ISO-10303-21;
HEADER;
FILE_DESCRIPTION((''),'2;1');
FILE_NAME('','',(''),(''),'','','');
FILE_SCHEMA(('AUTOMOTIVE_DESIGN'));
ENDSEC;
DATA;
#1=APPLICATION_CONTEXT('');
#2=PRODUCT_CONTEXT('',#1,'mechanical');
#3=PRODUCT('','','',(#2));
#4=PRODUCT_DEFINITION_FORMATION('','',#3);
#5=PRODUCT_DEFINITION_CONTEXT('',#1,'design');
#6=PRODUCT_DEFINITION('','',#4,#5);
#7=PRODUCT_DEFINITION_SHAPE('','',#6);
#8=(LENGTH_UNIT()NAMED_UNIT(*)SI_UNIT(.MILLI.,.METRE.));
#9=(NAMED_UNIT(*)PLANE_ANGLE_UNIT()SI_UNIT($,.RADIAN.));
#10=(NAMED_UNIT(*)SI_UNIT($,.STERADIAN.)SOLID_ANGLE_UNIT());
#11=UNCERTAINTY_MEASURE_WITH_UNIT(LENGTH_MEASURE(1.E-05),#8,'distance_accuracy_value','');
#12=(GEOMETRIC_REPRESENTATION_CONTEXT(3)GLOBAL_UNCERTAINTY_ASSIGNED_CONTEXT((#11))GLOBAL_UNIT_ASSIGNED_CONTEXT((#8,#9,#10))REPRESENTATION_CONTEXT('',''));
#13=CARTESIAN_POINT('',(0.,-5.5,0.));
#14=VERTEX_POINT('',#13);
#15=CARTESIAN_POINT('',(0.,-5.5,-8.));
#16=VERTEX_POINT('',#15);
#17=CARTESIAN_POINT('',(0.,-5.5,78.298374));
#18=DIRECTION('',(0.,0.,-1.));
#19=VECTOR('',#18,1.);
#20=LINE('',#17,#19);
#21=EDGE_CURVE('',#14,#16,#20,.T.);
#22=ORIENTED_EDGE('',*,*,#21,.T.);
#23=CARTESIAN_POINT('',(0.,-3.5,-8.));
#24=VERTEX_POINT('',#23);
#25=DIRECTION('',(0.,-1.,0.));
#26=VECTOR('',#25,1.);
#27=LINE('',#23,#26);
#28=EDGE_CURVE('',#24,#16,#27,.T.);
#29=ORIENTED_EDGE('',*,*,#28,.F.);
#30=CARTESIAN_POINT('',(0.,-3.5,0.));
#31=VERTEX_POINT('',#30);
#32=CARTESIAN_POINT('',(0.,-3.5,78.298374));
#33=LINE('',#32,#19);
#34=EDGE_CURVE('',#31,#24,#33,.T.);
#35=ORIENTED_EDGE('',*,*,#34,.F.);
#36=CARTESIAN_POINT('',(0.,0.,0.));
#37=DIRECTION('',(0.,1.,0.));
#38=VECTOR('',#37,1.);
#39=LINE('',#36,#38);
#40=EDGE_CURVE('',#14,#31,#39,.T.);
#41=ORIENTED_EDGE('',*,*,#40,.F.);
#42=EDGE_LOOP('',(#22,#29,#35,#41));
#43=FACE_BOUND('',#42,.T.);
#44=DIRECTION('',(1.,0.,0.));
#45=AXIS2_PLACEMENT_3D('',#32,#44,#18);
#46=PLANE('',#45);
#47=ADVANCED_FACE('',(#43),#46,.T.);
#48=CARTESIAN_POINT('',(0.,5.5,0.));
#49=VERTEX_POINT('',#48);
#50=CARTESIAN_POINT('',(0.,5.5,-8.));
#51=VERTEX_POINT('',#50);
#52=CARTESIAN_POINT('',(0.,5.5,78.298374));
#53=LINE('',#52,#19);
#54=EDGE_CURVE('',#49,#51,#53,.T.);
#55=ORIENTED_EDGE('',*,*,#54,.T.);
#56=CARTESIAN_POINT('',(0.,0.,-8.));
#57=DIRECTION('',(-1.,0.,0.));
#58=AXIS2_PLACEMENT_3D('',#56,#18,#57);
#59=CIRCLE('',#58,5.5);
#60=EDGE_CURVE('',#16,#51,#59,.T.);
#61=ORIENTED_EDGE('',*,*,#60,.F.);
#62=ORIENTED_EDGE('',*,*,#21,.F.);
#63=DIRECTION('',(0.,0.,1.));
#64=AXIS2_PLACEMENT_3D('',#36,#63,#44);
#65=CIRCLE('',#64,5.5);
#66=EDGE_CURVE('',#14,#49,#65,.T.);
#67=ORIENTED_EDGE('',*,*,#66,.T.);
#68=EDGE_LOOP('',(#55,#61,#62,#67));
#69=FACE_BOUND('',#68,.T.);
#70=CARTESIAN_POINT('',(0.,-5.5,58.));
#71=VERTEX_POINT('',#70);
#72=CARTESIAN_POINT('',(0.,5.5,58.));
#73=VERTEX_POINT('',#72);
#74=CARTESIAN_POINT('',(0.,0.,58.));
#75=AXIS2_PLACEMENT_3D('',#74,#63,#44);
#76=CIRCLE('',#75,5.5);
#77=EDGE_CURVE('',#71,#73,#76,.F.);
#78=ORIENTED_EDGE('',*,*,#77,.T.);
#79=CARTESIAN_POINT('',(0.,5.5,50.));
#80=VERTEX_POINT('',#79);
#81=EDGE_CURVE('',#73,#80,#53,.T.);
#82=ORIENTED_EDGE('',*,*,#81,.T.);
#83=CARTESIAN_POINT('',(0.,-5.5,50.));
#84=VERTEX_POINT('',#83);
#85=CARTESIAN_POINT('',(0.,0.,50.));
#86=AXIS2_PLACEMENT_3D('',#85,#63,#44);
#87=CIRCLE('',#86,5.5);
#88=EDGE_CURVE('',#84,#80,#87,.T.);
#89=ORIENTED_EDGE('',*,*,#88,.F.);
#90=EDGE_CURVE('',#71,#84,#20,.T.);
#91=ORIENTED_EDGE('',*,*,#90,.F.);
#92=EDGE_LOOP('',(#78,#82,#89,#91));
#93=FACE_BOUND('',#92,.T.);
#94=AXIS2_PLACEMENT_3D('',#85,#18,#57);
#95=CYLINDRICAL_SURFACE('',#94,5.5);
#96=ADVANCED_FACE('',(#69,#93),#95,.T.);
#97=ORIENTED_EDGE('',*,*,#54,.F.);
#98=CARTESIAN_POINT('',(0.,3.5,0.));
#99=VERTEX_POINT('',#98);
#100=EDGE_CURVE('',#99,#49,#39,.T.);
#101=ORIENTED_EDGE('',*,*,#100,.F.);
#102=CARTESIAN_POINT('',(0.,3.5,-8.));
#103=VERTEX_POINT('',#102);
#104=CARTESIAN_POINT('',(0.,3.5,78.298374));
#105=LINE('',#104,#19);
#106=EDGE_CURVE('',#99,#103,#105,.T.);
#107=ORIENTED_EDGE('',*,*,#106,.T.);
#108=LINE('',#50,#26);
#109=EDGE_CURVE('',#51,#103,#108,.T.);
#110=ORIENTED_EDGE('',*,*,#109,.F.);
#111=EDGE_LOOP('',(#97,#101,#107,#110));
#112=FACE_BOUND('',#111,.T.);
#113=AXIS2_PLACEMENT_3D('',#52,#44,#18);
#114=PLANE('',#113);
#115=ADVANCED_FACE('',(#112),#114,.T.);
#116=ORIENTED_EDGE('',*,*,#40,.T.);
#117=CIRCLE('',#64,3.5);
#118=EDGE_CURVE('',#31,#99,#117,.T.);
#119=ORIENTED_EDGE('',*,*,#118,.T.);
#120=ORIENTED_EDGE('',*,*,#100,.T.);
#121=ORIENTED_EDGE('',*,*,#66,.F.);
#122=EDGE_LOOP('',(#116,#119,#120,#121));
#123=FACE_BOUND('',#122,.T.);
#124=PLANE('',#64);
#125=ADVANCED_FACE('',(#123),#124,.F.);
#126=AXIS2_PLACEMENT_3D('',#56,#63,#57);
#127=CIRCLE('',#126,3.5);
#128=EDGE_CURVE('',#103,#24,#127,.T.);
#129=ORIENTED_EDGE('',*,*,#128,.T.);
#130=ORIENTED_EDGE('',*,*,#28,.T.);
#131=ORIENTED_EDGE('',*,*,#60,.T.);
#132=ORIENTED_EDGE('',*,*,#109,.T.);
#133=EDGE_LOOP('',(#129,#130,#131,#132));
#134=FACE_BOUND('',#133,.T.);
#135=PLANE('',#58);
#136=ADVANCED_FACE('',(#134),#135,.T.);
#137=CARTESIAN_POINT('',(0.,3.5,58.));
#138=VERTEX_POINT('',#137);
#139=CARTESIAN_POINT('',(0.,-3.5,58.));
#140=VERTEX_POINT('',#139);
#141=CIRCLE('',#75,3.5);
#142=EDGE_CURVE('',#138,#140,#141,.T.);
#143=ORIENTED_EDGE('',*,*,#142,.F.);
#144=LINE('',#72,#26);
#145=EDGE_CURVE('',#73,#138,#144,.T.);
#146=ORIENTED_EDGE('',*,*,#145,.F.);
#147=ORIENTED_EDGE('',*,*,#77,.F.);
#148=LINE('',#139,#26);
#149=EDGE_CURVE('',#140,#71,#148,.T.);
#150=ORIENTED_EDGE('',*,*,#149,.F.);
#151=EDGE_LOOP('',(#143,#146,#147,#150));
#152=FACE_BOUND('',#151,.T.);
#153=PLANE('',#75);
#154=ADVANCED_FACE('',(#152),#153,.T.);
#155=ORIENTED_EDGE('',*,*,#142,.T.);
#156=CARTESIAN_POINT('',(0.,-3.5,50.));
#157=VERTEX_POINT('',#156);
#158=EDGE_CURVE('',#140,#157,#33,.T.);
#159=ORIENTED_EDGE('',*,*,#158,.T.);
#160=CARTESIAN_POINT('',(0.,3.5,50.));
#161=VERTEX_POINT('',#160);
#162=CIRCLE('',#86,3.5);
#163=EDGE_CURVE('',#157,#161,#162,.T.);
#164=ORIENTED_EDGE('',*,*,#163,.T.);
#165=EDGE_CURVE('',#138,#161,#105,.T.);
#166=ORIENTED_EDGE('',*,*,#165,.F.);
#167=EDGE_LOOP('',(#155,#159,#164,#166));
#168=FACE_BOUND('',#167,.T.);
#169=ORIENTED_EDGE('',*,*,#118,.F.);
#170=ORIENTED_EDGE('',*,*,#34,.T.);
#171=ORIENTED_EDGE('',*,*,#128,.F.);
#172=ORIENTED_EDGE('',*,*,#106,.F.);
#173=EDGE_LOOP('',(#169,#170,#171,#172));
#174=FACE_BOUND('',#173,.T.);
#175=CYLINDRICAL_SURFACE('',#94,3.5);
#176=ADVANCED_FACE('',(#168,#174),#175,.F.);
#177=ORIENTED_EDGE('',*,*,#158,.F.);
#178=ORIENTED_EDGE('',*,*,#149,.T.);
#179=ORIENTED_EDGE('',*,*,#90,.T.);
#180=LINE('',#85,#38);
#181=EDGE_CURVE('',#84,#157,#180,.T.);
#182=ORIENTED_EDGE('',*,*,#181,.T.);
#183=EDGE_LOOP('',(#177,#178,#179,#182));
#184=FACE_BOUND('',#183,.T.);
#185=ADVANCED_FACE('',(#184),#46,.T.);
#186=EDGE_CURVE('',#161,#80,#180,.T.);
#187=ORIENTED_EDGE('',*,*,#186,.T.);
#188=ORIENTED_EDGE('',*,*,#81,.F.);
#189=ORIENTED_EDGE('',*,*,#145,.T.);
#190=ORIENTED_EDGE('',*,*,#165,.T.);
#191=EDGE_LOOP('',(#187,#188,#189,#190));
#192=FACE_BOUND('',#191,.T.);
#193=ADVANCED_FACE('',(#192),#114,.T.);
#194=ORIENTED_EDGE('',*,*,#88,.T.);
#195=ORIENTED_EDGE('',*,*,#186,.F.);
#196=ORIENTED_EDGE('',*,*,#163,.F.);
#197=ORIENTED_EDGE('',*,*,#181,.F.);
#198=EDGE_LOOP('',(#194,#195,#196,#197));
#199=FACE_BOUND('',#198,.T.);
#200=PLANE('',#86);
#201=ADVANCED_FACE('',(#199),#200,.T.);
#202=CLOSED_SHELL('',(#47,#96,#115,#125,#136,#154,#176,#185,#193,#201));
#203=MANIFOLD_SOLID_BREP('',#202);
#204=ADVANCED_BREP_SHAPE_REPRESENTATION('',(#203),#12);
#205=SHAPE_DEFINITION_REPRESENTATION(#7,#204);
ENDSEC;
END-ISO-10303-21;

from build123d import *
from build123d.topology import SkipClean

# Parameters (mm, degrees)
SKETCH1_R                                        = 5.5
SKETCH1_R_2                                      = 3.5
BOSS_EXTRUDE1_DLUGOSC_CALKOWITA_DEPTH            = 50
BOSS_EXTRUDE2_PRZEDLUZENIE_DO_MONTAZU_DEPTH      = 8
BOSS_EXTRUDE2_PRZEDLUZENIE_DO_MONTAZU_DEPTH_BACK = 58


with BuildPart() as part:
    # Sketch1 → Boss-Extrude1 dlugosc calkowita (new body)
    with BuildSketch(Plane.XY):
        Circle(SKETCH1_R)
        Circle(SKETCH1_R_2, mode=Mode.SUBTRACT)
    extrude(amount=BOSS_EXTRUDE1_DLUGOSC_CALKOWITA_DEPTH)

    # Sketch2 → Boss-Extrude2 przedluzenie do montazu (add, two sides: drawn at the far end of the back side and taken through both)
    with SkipClean():  # the faces are left unmerged after this step: merging them gives an invalid solid
        with BuildSketch(Plane(origin=(0, 0, 0), x_dir=(-1, 0, 0), z_dir=(0, 0, -1)).offset(-BOSS_EXTRUDE2_PRZEDLUZENIE_DO_MONTAZU_DEPTH_BACK)):
            with BuildLine():
                Line((0, 5.5), (0, 3.5))
                ThreePointArc((0, 3.5), (3.5, 0), (0, -3.5))
                Line((0, -3.5), (0, -5.5))
                ThreePointArc((0, -5.5), (5.5, 0), (0, 5.5))
            make_face()
        extrude(amount=BOSS_EXTRUDE2_PRZEDLUZENIE_DO_MONTAZU_DEPTH + BOSS_EXTRUDE2_PRZEDLUZENIE_DO_MONTAZU_DEPTH_BACK)
    add(part.part.scale(1), mode=Mode.REPLACE)  # the faces are merged on a copy


solid = part.part
